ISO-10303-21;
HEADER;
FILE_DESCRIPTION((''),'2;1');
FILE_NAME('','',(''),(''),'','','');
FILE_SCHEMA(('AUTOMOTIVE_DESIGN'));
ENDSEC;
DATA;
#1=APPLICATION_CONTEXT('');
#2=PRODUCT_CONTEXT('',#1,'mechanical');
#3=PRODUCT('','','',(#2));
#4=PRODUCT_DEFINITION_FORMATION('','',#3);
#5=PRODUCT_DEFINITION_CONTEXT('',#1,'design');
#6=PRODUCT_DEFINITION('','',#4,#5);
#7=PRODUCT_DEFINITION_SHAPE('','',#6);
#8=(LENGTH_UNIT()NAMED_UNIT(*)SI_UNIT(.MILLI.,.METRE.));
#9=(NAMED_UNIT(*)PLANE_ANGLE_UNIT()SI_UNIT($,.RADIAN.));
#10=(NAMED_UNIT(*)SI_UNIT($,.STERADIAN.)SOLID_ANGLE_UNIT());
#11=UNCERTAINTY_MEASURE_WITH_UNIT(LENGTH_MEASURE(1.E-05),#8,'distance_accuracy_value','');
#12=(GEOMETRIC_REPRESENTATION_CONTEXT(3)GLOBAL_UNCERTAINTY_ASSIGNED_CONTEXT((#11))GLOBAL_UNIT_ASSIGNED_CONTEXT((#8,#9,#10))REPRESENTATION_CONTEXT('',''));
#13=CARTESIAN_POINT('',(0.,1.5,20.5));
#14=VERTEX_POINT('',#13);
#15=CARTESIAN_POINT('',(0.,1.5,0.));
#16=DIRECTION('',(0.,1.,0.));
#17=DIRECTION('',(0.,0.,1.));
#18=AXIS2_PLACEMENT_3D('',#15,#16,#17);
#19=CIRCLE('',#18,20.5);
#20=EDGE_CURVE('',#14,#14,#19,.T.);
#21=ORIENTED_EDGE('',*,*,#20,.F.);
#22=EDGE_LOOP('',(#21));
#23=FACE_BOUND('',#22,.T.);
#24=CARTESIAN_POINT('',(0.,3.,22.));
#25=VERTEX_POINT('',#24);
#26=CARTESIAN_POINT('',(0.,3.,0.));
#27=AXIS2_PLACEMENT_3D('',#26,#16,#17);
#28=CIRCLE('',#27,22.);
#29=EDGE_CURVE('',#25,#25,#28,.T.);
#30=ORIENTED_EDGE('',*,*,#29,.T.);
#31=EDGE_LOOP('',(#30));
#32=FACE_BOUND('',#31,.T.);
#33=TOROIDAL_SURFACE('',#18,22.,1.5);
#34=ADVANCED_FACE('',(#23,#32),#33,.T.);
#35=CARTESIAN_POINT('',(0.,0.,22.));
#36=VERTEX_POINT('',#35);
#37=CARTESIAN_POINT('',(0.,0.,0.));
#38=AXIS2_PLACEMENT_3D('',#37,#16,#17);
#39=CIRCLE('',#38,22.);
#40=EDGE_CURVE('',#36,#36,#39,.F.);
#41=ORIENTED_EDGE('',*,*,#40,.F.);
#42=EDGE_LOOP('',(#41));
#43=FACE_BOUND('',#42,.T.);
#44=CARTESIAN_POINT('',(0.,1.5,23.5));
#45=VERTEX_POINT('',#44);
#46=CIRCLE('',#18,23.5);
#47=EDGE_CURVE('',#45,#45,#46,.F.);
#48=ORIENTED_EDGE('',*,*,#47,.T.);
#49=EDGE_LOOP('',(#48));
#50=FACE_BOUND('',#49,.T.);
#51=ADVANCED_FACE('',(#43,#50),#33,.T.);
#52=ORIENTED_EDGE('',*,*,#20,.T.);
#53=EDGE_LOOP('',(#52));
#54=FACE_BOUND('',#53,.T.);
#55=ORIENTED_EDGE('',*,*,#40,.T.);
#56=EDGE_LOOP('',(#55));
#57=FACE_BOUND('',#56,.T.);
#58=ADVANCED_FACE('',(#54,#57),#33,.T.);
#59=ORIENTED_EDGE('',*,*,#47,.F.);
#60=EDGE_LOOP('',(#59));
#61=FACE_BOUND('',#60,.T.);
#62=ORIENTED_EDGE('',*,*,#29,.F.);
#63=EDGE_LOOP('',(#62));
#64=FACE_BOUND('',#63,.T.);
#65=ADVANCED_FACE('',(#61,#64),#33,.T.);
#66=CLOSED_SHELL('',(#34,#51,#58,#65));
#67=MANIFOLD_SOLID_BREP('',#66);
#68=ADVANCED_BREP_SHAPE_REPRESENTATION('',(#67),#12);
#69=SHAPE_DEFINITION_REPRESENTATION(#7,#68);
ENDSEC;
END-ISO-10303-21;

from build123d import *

# Parameters (mm, degrees)
SKETCH_2_R      = 23.5
SKETCH_2_R_2    = 20.5
EXTRUDE_1_DEPTH = 3
FILLET_2_R      = 1.5


with BuildPart() as part:
    # 草图2 → 凸台-拉伸1 (new body)
    with BuildSketch(Plane(origin=(0, 0, 0), x_dir=(1, 0, 0), z_dir=(0, 1, 0))):
        with Locations(Location((0, 0, 0), (0, 0, 270))):
            Circle(SKETCH_2_R)
        with Locations(Location((0, 0, 0), (0, 0, 270))):
            Circle(SKETCH_2_R_2, mode=Mode.SUBTRACT)
    extrude(amount=EXTRUDE_1_DEPTH)

    # 圆角2
    fillet_2_edges = [part.edges().sort_by_distance(p)[0] for p in [
        (0, 0, -23.5),
        (0, 3, -23.5),
        (0, 0, -20.5),
        (0, 3, -20.5),
    ]]
    fillet(fillet_2_edges, radius=FILLET_2_R - 0.0001)  # a hair under: the kernel refuses the full size


solid = part.part
